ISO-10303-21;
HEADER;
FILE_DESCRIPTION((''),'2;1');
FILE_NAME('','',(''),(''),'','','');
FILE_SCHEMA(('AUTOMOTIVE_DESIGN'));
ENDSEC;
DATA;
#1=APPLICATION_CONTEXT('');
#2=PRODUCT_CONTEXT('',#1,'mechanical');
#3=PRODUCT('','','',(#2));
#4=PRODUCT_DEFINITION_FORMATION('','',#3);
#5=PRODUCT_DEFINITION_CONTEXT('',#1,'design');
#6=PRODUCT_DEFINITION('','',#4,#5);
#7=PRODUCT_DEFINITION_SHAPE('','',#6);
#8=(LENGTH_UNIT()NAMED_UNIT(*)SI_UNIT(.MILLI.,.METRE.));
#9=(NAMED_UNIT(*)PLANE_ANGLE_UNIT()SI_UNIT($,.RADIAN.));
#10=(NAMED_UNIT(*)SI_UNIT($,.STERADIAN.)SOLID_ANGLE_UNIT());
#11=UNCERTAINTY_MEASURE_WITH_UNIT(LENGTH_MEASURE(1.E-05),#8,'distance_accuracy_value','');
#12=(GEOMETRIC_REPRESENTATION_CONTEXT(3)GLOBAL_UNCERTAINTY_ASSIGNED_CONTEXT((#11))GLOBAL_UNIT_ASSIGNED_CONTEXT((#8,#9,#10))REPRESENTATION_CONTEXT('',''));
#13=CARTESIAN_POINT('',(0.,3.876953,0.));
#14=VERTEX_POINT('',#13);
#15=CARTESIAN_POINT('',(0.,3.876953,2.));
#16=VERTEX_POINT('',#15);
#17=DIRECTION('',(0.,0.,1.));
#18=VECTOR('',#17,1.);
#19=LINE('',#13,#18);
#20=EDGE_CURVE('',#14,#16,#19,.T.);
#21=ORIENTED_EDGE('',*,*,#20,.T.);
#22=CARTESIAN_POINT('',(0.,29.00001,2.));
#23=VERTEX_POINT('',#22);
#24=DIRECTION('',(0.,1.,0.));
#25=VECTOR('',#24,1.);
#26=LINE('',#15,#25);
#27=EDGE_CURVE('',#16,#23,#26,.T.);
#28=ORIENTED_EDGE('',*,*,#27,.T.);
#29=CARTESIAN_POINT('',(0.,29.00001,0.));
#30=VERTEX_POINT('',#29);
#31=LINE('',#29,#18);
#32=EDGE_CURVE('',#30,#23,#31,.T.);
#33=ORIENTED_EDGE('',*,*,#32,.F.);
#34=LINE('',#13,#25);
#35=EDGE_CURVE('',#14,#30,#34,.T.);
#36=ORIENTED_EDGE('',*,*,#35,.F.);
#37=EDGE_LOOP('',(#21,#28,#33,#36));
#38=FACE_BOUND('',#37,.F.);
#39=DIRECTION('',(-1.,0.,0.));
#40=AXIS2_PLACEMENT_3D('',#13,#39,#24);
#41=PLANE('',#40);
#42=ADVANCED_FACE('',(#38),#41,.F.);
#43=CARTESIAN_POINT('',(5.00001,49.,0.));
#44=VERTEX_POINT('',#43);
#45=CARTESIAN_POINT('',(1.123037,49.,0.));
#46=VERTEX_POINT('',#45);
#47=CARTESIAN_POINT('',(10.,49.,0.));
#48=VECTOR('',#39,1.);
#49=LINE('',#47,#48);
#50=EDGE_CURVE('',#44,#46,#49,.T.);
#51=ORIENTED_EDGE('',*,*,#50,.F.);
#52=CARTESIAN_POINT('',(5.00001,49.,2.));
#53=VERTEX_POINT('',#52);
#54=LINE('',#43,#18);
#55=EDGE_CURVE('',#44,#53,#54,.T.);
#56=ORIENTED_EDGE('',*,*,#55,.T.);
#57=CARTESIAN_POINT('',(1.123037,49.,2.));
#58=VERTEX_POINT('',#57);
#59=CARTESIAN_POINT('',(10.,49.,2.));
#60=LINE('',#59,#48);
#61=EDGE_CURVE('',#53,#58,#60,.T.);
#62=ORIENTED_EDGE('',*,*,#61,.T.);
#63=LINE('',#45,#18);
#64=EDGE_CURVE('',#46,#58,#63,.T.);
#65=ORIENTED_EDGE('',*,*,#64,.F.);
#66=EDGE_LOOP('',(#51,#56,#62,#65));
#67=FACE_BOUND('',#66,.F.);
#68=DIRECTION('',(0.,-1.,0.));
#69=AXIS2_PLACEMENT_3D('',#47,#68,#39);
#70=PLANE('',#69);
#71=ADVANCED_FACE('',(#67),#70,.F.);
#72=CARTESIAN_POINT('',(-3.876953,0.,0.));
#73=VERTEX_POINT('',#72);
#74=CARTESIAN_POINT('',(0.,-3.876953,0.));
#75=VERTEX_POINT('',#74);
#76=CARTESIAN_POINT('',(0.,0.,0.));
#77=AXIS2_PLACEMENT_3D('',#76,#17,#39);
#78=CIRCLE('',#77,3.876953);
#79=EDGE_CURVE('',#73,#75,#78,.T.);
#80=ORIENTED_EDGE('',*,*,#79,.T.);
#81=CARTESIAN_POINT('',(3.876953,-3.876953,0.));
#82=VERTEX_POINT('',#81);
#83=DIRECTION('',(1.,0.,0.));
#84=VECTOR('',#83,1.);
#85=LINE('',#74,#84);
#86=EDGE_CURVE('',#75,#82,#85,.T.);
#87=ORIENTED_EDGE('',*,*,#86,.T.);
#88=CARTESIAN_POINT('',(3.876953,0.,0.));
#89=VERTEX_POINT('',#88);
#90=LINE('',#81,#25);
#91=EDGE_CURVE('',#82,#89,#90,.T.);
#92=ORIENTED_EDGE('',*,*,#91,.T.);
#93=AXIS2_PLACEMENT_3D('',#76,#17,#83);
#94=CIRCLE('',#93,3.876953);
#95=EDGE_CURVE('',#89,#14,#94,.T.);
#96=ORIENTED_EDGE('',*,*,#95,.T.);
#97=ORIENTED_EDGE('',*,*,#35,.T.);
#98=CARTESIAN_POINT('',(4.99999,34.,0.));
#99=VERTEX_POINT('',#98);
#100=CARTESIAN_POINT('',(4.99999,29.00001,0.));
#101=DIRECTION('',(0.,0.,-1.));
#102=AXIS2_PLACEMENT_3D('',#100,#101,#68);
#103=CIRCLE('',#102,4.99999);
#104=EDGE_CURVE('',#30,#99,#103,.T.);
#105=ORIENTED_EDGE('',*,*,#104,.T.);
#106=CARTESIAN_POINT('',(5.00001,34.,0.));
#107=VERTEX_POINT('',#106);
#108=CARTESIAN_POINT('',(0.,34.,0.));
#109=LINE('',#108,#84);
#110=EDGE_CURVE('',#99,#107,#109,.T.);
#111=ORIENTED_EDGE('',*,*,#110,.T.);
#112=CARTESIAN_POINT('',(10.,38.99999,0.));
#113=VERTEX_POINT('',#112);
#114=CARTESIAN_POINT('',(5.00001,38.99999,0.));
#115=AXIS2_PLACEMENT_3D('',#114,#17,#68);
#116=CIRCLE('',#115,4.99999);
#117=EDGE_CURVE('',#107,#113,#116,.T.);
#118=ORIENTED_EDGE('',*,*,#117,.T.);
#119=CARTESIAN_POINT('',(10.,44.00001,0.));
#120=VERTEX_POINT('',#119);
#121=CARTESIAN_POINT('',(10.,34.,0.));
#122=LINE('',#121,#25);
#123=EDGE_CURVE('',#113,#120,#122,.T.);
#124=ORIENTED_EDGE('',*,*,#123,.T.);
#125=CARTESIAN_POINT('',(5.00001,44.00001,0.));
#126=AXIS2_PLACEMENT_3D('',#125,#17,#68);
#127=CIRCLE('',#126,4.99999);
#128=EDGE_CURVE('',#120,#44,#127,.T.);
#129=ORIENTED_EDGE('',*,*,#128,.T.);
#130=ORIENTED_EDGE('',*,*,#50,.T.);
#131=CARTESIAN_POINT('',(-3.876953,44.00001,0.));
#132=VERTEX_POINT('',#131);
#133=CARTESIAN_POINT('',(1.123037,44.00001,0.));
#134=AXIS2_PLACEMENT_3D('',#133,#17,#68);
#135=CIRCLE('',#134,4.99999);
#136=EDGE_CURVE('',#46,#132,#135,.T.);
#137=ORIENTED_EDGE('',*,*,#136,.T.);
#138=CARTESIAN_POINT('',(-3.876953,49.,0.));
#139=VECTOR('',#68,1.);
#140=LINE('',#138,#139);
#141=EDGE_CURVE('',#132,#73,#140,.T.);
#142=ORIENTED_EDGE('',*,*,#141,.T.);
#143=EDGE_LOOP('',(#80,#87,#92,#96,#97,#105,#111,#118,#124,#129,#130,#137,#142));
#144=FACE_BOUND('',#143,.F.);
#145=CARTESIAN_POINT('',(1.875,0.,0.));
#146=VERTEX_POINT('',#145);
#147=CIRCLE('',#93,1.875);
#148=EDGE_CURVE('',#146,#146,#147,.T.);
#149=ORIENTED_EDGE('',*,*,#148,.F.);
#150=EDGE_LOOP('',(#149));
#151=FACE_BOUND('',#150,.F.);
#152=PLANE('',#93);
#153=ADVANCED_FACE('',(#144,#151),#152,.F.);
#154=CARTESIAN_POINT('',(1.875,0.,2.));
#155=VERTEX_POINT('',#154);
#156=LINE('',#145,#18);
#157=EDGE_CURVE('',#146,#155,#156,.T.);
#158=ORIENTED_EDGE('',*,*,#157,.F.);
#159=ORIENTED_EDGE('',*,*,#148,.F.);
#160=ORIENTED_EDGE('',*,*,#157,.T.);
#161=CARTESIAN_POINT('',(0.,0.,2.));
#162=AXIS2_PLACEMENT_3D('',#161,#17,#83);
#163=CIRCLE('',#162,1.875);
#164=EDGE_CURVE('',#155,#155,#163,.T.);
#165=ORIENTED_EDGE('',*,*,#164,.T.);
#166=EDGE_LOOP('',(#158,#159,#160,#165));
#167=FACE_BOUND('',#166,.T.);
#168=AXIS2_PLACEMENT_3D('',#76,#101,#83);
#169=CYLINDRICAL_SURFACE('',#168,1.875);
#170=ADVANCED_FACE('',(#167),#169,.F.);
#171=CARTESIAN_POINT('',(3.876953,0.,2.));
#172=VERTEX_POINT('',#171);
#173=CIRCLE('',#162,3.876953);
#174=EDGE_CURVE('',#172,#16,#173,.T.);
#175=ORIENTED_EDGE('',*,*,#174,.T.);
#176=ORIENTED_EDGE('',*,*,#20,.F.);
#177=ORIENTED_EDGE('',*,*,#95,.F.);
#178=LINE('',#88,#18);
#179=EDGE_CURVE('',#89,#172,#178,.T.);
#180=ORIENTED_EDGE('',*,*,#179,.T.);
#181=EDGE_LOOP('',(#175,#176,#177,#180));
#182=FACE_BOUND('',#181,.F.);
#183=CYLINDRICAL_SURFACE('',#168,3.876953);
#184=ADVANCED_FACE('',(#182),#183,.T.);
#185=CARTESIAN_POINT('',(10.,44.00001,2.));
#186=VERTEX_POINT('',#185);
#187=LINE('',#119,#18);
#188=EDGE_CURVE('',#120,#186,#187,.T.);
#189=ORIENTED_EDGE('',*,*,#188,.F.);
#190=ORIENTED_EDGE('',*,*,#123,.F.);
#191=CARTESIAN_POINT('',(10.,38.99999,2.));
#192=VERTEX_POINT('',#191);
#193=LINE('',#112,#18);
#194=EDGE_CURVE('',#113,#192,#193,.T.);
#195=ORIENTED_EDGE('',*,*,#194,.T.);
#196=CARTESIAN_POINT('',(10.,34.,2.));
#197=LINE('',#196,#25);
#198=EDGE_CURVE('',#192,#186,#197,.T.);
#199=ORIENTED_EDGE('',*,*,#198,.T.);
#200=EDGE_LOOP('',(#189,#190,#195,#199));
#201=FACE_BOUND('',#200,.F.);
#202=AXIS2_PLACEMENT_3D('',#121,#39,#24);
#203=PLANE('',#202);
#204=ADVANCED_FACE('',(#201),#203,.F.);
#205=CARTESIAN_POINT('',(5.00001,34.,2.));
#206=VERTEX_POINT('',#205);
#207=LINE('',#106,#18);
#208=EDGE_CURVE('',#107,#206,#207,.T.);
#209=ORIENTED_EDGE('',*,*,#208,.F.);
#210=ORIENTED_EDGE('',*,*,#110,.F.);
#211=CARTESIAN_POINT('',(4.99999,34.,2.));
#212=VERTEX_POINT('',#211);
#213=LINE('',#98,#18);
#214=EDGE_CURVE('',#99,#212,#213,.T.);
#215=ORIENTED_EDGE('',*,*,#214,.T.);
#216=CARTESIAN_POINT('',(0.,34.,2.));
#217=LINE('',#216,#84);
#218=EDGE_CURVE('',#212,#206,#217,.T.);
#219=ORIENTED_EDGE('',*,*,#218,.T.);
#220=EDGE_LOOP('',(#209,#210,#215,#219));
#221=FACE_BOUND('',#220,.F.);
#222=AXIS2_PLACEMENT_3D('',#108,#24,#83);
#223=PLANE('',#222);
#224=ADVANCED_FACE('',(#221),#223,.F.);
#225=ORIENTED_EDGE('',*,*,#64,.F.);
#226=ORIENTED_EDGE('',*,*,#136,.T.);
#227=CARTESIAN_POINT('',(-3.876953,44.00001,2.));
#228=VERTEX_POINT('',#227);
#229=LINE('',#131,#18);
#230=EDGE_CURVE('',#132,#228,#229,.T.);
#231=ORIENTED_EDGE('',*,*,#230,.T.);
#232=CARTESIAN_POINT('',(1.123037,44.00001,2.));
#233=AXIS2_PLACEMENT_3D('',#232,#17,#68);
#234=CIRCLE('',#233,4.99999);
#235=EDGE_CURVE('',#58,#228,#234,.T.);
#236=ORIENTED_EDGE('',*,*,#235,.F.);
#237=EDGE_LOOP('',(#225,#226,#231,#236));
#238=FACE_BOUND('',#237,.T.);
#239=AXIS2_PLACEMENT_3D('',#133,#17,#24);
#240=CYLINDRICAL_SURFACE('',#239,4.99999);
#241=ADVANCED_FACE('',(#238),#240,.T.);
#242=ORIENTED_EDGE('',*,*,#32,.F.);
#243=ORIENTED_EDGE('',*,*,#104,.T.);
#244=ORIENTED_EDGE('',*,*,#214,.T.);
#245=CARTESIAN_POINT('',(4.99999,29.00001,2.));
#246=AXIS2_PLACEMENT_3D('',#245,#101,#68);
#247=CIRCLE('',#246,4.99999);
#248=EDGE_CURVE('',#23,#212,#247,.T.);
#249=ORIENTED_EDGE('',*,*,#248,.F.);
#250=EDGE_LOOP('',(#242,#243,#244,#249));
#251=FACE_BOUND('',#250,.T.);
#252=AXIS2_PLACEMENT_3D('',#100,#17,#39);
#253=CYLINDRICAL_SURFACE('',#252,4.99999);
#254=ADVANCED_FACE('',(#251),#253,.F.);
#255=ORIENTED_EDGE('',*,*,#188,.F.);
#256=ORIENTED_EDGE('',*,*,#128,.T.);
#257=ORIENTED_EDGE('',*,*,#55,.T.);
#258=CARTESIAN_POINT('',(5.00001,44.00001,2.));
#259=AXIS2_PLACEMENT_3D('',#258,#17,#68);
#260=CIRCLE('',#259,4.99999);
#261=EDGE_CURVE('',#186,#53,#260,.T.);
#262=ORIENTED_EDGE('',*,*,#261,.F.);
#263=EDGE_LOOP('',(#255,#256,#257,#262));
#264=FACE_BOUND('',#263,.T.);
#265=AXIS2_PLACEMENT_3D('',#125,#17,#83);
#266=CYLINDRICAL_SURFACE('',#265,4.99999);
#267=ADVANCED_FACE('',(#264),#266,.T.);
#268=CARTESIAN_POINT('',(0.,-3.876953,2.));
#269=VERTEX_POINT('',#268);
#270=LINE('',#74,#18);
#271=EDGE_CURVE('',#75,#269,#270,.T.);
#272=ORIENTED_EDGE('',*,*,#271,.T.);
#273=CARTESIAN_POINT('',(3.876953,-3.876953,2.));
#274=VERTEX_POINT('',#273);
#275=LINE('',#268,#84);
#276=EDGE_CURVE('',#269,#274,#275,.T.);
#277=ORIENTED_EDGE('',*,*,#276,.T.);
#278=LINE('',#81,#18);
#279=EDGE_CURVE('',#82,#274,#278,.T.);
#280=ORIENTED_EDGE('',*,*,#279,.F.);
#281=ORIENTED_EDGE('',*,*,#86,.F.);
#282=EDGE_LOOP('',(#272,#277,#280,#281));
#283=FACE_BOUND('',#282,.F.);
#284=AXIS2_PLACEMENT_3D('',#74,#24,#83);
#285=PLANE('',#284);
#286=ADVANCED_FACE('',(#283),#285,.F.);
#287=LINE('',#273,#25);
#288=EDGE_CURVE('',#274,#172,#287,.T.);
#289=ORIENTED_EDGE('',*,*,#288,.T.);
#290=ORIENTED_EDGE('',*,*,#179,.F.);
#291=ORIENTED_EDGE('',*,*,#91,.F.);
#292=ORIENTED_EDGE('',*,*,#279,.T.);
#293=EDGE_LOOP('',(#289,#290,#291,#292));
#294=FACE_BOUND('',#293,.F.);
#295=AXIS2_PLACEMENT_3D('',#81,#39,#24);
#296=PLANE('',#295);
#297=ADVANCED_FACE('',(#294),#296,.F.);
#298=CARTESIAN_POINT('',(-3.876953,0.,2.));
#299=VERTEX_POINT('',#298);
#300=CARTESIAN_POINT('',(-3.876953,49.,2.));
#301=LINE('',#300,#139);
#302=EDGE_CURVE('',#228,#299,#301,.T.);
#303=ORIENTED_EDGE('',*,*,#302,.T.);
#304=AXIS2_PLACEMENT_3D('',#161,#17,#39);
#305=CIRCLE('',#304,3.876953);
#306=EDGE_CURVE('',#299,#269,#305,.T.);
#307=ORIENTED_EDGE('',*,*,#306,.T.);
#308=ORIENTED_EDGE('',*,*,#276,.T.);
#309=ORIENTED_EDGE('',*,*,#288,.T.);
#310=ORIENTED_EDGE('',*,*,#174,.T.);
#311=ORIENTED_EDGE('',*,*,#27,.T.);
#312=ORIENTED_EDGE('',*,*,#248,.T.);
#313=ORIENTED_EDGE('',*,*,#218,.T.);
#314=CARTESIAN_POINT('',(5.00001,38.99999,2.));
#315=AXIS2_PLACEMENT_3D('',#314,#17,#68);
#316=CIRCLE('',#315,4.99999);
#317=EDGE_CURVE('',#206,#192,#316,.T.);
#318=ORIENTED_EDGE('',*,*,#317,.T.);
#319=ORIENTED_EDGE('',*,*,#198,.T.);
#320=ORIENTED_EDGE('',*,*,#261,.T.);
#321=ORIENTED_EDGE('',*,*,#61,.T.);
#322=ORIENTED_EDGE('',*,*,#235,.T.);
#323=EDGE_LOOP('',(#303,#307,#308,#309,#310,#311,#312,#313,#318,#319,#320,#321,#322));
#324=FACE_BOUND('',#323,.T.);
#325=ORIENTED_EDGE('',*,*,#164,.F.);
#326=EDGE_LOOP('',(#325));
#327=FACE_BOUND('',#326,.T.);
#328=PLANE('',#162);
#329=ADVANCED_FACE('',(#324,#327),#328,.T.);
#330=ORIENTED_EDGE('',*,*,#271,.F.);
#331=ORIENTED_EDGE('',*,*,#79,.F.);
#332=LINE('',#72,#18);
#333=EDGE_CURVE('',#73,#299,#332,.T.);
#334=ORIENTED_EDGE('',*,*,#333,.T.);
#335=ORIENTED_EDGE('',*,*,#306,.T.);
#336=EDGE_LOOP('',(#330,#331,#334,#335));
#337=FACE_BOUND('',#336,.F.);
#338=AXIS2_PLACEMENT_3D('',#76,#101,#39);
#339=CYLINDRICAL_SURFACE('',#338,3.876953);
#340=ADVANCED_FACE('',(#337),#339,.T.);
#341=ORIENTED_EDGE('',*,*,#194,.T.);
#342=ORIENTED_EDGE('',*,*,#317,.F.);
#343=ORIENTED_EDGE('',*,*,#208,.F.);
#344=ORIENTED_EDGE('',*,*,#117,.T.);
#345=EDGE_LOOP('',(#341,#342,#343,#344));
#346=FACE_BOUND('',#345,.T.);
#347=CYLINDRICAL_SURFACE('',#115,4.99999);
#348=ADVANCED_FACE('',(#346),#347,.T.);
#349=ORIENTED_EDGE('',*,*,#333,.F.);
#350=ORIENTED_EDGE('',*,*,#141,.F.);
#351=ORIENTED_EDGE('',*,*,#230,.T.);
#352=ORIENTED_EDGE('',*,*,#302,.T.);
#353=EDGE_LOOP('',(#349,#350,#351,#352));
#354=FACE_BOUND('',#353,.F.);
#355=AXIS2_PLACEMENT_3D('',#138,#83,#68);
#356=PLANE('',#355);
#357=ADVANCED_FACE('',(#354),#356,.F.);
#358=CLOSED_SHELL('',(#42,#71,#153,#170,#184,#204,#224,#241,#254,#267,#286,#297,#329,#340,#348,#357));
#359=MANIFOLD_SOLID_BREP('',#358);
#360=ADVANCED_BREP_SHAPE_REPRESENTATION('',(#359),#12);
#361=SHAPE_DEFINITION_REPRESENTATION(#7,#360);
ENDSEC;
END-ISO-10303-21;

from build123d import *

# Parameters (mm, degrees)
F0_R     = 1.875
F1_DEPTH = 2
F2_R     = 4.99999


# Not quite as in the source:
# - a fillet or chamfer is up to 0.001 mm smaller than in the source, because OpenCascade refuses the exact size


with BuildPart() as f1:
    # F0 (on Top) → F1 (new body)
    with BuildSketch(Plane.XY):
        with BuildLine():
            ThreePointArc((0, 3.876953125), (-2.741419845, 2.741419845), (-3.876953125, 0))
            ThreePointArc((-3.876953125, 0), (-2.741419845, -2.741419845), (0, -3.876953125))
            ThreePointArc((0, -3.876953125), (2.741419845, -2.741419845), (3.876953125, 0))
            ThreePointArc((3.876953125, 0), (2.741419845, 2.741419845), (0, 3.876953125))
        make_face()
        Circle(F0_R, mode=Mode.SUBTRACT)
        with BuildLine():
            Line((-3.876953125, 49), (-3.876953125, 0))
            ThreePointArc((-3.876953125, 0), (-2.741419845, 2.741419845), (0, 3.876953125))
            Line((0, 3.876953125), (0, 34))
            Line((0, 34), (10, 34))
            Line((10, 34), (10, 49))
            Line((10, 49), (-3.876953125, 49))
        make_face()
        with BuildLine():
            ThreePointArc((3.876953125, 0), (2.741419845, -2.741419845), (0, -3.876953125))
            Line((0, -3.876953125), (3.876953125, -3.876953125))
            Line((3.876953125, -3.876953125), (3.876953125, 0))
        make_face()
    extrude(amount=F1_DEPTH)

    # F2 (radius 5 in the source; OpenCascade refuses exactly that, so slightly less here)
    f2_edges = [f1.edges().sort_by_distance(p)[0] for p in [
        (0, 34, 1),
        (10, 34, 1),
        (10, 49, 1),
        (-3.876953, 49, 1),
    ]]
    fillet(f2_edges, radius=F2_R)


solid = f1.part
